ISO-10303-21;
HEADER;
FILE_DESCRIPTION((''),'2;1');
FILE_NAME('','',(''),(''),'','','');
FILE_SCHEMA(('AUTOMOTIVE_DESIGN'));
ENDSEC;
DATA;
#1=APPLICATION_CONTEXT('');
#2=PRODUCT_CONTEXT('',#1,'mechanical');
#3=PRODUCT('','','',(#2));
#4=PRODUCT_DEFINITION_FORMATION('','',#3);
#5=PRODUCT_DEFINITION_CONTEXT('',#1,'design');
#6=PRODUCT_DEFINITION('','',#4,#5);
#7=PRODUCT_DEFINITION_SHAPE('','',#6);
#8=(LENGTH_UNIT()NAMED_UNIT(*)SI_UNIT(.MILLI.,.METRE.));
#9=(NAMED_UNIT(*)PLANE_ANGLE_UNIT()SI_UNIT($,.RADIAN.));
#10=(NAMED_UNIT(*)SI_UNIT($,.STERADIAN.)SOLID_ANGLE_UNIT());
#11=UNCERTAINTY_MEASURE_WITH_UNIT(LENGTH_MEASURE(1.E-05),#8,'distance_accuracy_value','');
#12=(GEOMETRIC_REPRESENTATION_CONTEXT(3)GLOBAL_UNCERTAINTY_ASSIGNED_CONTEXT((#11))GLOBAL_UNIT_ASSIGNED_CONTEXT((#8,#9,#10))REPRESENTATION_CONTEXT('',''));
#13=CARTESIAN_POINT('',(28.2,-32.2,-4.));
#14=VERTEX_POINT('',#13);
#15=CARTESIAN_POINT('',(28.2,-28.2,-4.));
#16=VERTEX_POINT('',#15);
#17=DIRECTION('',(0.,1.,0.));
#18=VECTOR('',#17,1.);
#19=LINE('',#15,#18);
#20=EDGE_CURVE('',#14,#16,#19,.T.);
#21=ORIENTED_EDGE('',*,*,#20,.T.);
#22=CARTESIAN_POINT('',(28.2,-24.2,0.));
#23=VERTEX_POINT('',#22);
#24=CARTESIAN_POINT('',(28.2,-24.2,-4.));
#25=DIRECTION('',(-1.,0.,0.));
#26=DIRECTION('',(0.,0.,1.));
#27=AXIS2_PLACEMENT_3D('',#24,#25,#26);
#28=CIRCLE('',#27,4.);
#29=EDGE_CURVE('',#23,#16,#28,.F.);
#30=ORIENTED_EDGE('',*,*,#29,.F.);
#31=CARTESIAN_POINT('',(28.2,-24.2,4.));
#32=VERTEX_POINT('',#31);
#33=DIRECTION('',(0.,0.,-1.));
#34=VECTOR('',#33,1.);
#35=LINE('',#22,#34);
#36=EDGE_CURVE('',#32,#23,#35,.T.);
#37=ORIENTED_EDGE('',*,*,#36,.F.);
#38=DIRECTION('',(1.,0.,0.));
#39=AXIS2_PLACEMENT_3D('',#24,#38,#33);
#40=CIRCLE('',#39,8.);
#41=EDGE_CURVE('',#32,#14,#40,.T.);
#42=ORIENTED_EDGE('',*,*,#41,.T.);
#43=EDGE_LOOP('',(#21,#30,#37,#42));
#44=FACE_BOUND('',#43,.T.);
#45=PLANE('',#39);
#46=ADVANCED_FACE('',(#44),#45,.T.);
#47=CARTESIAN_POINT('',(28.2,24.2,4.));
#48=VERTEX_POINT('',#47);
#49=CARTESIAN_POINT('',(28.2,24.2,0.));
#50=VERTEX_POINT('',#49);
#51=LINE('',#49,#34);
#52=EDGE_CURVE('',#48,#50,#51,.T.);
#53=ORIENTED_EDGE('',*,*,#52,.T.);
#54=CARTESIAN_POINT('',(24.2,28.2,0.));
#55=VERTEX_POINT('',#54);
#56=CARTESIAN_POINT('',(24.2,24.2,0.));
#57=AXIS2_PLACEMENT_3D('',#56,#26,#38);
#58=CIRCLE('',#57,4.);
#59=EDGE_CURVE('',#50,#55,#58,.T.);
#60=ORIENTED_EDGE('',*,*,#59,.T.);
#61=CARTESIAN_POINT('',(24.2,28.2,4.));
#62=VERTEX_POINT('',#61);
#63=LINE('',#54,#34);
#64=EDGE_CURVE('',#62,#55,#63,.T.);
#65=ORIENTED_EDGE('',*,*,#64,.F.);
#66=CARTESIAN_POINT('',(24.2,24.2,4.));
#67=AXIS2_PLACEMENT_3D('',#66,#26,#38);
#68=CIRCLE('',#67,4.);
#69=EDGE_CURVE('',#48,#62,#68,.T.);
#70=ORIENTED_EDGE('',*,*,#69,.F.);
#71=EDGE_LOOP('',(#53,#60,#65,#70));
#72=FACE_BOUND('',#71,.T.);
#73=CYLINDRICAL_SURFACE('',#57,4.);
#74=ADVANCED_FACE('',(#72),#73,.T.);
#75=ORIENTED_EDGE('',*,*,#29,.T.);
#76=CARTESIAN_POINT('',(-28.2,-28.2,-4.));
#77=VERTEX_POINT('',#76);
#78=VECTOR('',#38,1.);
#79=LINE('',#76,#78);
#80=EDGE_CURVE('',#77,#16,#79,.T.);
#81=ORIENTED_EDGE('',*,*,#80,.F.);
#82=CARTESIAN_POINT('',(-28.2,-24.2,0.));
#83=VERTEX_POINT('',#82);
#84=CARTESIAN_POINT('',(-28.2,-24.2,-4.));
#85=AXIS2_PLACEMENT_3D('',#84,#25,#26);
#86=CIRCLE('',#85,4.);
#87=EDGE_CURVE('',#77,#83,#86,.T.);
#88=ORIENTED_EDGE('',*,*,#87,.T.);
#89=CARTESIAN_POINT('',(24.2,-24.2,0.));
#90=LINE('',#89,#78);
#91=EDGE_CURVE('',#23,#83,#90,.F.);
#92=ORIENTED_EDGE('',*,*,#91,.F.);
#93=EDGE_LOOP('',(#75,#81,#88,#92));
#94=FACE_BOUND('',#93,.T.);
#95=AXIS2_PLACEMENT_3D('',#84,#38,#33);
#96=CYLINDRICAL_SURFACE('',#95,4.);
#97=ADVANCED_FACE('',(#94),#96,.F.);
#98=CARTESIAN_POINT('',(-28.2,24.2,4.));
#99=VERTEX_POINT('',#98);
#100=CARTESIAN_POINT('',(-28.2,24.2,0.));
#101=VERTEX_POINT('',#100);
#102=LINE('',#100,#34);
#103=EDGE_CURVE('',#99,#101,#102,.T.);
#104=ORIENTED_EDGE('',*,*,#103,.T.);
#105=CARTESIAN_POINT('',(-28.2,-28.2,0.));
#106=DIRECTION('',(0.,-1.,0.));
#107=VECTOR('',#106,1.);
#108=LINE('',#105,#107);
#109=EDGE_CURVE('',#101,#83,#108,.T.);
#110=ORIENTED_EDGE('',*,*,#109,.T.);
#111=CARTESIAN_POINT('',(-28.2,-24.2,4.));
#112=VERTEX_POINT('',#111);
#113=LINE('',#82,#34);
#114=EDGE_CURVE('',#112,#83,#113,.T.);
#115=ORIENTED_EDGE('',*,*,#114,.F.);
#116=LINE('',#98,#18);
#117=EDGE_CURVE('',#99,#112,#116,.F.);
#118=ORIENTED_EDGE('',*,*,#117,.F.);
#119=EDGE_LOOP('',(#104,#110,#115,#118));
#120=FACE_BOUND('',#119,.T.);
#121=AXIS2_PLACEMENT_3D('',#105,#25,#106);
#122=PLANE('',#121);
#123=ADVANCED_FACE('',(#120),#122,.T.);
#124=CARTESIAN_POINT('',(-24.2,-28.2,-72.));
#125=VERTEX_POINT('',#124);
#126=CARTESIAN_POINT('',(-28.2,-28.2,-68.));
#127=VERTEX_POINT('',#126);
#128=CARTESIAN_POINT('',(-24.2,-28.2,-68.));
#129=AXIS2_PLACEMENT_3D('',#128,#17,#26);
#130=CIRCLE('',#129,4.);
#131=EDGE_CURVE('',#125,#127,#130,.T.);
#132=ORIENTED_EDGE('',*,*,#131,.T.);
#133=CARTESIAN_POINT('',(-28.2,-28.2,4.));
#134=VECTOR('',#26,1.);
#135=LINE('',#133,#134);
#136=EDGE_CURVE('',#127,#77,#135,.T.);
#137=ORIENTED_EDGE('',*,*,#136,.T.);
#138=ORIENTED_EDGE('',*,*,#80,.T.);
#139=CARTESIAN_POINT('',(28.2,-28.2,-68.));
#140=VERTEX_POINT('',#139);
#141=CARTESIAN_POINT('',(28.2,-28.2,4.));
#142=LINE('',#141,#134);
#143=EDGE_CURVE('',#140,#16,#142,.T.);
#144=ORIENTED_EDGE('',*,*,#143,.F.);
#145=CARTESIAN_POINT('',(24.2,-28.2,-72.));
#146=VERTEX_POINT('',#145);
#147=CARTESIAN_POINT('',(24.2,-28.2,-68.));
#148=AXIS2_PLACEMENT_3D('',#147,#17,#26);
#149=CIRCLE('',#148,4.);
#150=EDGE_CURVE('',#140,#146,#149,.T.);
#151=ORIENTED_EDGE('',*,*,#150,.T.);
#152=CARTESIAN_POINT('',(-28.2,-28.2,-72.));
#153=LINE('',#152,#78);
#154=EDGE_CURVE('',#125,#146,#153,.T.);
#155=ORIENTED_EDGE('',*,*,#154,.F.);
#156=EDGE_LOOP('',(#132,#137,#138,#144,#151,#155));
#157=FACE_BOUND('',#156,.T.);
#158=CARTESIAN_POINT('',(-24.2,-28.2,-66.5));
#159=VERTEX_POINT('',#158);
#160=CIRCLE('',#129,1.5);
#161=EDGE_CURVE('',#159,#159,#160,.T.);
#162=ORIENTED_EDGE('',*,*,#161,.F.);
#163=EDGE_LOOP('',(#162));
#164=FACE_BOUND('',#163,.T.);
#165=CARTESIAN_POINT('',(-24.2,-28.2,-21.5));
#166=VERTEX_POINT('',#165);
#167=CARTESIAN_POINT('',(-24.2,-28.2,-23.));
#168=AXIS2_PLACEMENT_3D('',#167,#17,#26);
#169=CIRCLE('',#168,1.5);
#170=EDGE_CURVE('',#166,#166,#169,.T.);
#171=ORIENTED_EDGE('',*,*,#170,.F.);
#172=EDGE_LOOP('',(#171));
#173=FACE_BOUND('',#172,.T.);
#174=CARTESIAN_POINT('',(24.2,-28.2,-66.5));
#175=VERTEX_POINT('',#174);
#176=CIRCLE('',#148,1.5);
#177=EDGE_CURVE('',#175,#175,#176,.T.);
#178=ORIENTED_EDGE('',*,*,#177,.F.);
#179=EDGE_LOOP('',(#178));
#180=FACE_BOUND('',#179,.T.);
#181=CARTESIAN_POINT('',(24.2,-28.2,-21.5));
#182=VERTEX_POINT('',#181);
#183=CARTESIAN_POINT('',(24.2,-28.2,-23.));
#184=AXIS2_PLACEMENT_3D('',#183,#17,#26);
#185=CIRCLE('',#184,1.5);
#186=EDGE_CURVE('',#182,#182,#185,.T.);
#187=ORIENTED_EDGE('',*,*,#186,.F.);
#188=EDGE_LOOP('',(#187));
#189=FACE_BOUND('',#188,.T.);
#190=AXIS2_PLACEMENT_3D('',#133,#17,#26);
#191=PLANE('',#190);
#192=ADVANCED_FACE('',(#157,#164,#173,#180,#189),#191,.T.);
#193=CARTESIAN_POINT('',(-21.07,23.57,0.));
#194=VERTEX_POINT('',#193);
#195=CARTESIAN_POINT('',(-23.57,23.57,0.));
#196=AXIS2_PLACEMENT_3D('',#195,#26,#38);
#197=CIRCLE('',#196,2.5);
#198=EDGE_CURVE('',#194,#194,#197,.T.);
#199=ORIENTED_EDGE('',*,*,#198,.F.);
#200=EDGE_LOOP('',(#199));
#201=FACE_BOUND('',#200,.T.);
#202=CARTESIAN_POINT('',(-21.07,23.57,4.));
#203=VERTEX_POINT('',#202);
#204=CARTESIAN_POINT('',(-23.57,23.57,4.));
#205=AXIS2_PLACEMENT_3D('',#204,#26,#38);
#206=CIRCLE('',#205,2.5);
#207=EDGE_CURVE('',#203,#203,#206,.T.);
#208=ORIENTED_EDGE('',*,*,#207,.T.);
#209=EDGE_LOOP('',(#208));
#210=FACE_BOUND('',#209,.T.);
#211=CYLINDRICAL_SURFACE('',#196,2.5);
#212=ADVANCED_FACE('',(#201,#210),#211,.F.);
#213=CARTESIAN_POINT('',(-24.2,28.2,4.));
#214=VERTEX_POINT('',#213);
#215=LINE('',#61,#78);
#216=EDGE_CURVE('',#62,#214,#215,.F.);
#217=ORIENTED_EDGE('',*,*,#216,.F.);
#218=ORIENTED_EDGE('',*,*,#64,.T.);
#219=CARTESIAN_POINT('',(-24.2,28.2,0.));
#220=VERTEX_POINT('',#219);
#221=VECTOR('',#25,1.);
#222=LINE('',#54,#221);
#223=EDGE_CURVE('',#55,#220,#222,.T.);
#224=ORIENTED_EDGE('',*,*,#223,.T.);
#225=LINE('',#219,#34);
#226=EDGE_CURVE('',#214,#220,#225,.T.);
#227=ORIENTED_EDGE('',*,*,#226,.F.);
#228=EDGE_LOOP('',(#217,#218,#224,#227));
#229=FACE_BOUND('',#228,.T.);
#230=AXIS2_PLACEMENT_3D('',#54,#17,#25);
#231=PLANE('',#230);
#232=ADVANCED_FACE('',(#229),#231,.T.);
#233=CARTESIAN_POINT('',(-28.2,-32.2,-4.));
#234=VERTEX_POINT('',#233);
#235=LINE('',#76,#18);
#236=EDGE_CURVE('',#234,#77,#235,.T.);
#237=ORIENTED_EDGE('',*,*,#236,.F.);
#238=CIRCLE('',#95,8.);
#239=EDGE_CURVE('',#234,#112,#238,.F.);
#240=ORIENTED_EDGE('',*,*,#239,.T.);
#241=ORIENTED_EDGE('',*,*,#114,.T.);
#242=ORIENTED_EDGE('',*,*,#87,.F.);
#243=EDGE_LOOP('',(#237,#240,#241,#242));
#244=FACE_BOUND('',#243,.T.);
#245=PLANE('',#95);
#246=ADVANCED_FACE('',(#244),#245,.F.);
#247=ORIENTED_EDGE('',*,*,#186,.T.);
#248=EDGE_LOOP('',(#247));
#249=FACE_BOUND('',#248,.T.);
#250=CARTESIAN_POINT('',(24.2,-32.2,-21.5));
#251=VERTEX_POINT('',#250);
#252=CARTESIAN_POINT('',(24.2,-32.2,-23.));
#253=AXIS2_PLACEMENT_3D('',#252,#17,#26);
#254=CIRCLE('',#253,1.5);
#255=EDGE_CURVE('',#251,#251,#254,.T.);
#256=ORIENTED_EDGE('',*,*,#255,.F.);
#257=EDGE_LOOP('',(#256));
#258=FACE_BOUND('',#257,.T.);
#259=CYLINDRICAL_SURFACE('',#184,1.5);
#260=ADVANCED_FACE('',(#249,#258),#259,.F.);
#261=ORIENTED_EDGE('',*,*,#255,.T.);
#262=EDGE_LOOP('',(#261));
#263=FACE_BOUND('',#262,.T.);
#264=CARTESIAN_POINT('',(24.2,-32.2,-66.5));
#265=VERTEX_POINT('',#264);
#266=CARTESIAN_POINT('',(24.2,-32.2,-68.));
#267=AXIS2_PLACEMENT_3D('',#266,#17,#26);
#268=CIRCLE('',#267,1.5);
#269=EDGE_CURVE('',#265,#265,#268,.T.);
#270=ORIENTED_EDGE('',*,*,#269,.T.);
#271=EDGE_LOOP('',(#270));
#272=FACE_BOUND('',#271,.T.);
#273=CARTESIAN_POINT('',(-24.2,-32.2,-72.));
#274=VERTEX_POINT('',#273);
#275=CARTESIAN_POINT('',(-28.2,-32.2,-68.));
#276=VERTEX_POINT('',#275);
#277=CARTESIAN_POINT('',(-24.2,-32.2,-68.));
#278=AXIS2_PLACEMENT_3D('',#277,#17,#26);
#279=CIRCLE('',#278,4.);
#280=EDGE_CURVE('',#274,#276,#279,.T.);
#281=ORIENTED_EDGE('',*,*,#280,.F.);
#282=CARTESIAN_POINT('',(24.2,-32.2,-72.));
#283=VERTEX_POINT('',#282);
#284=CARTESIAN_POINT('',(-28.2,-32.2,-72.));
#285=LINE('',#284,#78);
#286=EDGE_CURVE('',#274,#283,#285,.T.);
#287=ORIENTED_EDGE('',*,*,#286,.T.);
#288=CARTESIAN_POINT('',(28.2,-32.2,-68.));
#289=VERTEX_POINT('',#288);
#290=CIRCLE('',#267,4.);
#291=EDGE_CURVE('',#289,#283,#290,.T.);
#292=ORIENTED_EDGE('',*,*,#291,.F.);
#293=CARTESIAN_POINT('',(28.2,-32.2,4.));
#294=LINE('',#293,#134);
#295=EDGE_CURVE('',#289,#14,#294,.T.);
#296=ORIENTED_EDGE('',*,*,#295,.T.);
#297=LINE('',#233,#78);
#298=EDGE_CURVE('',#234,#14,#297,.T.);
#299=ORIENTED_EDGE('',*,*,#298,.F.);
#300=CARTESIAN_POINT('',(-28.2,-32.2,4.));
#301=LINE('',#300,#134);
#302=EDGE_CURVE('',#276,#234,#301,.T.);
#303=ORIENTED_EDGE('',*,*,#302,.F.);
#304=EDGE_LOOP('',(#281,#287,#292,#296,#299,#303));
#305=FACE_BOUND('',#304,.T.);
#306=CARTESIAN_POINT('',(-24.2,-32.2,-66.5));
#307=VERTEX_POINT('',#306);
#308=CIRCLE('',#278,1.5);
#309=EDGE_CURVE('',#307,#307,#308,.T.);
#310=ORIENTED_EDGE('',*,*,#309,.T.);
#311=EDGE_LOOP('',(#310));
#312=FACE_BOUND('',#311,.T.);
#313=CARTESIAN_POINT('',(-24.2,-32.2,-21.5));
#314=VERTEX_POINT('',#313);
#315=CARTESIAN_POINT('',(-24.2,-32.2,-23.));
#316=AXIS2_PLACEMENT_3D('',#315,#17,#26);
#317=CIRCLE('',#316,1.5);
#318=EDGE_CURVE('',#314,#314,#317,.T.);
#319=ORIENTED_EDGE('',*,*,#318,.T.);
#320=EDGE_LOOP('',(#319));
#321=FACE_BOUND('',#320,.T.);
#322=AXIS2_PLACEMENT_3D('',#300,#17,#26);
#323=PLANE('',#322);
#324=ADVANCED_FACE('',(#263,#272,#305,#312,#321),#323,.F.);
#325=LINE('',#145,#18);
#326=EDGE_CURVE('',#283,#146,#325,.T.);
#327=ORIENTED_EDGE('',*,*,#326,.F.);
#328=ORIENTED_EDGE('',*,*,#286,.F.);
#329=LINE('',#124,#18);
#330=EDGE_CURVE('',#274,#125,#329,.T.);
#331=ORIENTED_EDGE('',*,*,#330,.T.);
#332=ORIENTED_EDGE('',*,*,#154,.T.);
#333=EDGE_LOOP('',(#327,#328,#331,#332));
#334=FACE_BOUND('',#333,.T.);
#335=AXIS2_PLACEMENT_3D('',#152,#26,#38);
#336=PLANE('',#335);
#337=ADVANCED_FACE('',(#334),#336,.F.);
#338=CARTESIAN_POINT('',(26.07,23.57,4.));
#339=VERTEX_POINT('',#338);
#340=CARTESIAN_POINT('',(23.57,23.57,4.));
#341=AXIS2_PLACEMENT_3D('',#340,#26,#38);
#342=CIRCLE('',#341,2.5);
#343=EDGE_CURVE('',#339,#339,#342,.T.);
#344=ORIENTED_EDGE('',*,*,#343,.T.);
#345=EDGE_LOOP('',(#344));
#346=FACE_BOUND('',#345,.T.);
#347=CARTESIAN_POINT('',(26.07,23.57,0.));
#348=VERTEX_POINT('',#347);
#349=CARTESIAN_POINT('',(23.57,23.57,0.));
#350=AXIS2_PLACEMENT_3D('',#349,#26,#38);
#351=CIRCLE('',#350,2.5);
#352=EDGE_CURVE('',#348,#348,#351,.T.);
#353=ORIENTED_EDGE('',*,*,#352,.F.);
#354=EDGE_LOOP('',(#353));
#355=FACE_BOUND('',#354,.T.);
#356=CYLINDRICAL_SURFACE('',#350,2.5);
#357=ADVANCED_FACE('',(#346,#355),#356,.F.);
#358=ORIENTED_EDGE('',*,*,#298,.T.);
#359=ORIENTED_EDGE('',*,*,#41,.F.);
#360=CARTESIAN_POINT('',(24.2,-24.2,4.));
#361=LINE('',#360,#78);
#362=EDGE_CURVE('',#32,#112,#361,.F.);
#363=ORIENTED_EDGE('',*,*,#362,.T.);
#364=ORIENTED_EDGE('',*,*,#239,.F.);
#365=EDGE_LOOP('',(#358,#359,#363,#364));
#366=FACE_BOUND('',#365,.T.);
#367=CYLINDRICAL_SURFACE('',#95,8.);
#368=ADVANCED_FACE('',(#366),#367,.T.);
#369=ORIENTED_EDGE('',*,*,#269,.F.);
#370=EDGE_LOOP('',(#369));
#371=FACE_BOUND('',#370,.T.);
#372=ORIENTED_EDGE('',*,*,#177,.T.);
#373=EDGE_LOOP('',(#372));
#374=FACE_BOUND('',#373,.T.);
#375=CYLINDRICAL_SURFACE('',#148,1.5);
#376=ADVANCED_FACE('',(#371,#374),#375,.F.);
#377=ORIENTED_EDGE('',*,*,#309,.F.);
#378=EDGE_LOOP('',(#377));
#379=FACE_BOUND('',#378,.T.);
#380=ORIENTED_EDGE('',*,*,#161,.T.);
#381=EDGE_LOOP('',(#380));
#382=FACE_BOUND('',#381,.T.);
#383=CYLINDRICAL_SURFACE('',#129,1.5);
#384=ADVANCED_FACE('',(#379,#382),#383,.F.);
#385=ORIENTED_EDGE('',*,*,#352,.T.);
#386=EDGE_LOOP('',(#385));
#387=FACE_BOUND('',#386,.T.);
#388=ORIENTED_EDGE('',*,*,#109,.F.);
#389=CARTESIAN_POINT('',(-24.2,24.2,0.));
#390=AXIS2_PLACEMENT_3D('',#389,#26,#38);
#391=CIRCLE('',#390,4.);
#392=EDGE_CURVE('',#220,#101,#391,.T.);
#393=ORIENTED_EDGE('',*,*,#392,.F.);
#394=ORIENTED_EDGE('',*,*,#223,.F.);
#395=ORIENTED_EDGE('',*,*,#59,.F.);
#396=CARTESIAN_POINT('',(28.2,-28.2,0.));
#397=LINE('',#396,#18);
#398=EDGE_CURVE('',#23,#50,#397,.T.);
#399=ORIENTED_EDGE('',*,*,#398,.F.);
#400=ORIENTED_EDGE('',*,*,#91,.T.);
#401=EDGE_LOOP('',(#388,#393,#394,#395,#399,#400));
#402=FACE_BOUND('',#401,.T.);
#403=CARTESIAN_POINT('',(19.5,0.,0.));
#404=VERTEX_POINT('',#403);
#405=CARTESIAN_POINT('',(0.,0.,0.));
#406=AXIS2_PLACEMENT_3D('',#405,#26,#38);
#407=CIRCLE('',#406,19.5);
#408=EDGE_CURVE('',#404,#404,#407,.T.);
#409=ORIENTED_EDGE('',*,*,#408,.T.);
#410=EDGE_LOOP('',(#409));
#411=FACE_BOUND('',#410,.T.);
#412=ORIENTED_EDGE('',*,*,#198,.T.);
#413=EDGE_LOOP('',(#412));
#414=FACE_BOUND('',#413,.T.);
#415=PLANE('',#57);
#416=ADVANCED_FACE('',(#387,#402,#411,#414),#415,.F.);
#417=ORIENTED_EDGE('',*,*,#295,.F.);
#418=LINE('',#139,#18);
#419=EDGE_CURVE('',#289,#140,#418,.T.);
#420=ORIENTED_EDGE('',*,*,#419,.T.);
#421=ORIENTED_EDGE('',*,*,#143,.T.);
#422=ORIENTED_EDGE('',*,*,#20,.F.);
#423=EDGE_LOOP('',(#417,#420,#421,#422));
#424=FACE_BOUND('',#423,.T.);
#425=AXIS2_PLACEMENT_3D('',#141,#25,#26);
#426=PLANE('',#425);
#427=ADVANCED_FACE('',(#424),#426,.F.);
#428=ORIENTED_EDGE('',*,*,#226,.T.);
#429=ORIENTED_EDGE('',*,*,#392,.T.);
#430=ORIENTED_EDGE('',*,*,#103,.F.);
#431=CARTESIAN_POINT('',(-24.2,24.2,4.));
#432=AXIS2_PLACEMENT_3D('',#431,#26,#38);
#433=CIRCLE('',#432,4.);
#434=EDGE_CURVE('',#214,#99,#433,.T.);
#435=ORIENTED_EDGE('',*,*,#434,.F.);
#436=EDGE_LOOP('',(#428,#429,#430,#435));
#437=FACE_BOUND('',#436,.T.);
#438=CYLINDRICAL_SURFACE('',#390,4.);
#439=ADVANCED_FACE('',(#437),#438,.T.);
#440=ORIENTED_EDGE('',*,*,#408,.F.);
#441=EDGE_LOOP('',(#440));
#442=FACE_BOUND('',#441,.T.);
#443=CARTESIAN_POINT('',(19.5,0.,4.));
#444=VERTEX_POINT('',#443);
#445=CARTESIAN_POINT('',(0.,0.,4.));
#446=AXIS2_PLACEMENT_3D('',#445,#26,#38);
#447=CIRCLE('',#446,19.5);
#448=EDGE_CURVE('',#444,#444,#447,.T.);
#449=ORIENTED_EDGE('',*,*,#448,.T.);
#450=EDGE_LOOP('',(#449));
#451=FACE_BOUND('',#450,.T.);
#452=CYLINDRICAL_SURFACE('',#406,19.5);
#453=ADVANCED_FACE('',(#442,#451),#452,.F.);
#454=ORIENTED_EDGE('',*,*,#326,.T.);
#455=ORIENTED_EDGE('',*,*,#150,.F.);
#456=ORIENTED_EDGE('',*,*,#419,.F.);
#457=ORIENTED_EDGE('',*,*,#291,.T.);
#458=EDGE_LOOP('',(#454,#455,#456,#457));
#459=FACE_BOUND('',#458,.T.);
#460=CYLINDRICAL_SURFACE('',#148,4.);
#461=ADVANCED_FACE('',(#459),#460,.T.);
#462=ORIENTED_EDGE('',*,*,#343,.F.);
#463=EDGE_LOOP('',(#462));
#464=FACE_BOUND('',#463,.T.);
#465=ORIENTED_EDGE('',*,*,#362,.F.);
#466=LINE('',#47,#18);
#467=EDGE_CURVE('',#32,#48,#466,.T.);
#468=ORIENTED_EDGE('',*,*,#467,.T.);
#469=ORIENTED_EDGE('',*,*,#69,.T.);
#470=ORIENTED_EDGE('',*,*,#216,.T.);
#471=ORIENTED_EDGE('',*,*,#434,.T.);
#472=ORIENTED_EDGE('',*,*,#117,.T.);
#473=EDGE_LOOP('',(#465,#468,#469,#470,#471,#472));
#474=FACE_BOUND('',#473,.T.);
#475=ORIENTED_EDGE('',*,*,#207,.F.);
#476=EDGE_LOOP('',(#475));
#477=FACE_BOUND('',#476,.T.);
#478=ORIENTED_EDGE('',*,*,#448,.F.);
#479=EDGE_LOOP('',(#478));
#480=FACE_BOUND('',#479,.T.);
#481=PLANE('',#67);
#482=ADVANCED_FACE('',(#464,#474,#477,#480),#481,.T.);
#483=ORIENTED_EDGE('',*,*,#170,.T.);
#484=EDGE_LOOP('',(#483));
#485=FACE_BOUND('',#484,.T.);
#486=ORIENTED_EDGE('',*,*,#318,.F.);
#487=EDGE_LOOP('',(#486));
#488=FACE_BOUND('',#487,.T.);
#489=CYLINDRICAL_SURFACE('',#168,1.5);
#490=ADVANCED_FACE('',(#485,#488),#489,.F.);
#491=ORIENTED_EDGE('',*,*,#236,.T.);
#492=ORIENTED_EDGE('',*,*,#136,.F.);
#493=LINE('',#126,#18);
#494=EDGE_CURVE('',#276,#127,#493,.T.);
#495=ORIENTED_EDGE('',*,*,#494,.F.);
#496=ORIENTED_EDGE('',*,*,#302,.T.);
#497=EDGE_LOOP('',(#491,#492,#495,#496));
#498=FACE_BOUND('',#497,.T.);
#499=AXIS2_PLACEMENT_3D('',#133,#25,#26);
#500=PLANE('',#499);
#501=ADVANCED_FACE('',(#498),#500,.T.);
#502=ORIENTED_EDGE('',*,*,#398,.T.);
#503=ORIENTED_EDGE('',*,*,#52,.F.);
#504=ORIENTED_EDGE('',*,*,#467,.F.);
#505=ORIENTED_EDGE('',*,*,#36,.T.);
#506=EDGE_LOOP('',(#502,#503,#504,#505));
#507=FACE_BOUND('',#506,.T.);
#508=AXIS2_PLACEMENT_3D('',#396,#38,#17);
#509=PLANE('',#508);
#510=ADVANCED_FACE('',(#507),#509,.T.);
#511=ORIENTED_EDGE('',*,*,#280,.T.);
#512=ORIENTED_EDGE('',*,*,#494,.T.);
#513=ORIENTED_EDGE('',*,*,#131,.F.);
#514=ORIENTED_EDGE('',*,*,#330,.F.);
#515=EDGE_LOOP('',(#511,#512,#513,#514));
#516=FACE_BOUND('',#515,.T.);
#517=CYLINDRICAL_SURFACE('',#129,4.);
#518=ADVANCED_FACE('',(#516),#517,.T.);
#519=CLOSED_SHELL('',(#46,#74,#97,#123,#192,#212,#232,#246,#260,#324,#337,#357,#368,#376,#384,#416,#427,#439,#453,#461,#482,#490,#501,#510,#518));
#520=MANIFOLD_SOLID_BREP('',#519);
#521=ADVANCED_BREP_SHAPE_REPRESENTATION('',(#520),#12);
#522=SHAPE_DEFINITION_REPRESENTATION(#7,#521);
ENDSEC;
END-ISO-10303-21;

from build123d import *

# Parameters (mm, degrees)
BOSS_EXTRUDE1_DEPTH    = 4
SKETCH3_W              = 76
SKETCH3_H              = 4
BOSS_EXTRUDE2_DEPTH    = 56.4
SKETCH15_R             = 2.5
SKETCH15_R_2           = 19.5
CUT_EXTRUDE3_DEPTH     = 88.224308538
FILLET4_R              = 4
SKETCH18_R             = 1.5
CUT_EXTRUDE4_DEPTH     = 96.708933752
CONVERT_SOLID2_START   = -28.2
CONVERT_SOLID2_DEPTH   = 56.4
CONVERT_SOLID2_2_DEPTH = 56.4


# Read off the part's stored shape, not the designer's step: Convert-Solid2
with BuildPart() as part:
    # Sketch1 → Boss-Extrude1 (new body)
    with BuildSketch(Plane.XY):
        with BuildLine():
            Line((28.2, -28.2), (-28.2, -28.2))
            Line((-28.2, -28.2), (-28.2, 24.2))
            ThreePointArc((-28.2, 24.2), (-27.028427125, 27.028427125), (-24.2, 28.2))
            Line((-24.2, 28.2), (24.2, 28.2))
            ThreePointArc((24.2, 28.2), (27.028427125, 27.028427125), (28.2, 24.2))
            Line((28.2, 24.2), (28.2, -28.2))
        make_face()
    extrude(amount=BOSS_EXTRUDE1_DEPTH)

    # Sketch3 → Boss-Extrude2 (add)
    with BuildSketch(Plane(origin=(28.2, 0, 0), x_dir=(0, 0, -1), z_dir=(1, 0, 0))):
        with Locations((34, -30.2)):
            Rectangle(SKETCH3_W, SKETCH3_H)
    extrude(amount=-BOSS_EXTRUDE2_DEPTH)

    # Sketch15 → Cut-Extrude3 (cut, through all)
    with BuildSketch(Plane.XY.offset(4)):
        with Locations((-23.57, 23.57)):
            Circle(SKETCH15_R)
        with Locations((23.57, 23.57)):
            Circle(SKETCH15_R)
        Circle(SKETCH15_R_2)
    extrude(amount=-CUT_EXTRUDE3_DEPTH, mode=Mode.SUBTRACT)

    # Fillet4
    fillet4_edges = [part.edges().sort_by_distance(p)[0] for p in [
        (-28.2, -30.2, -72),
        (28.2, -30.2, -72),
    ]]
    fillet(fillet4_edges, radius=FILLET4_R)

    # Sketch18 → Cut-Extrude4 (cut, through all)
    with BuildSketch(Plane(origin=(0, -28.2, 0), x_dir=(1, 0, 0), z_dir=(0, 1, 0))):
        with Locations(Location((-24.2, 68, 0), (0, 0, 270))):
            Circle(SKETCH18_R)
        with Locations(Location((24.2, 68, 0), (0, 0, 270))):
            Circle(SKETCH18_R)
        with Locations(Location((-24.2, 23, 0), (0, 0, 270))):
            Circle(SKETCH18_R)
        with Locations(Location((24.2, 23, 0), (0, 0, 270))):
            Circle(SKETCH18_R)
    extrude(amount=-CUT_EXTRUDE4_DEPTH, mode=Mode.SUBTRACT)

    # Convert-Solid2 outline → Convert-Solid2 (cut)
    with BuildSketch(Plane.YZ.offset(CONVERT_SOLID2_START)):
        with BuildLine():
            ThreePointArc((-32.2, -4), (-29.856854249, 1.656854249), (-24.2, 4))
            Line((-24.2, 4), (-32.2, 4))
            Line((-32.2, 4), (-32.2, -4))
        make_face()
    extrude(amount=CONVERT_SOLID2_DEPTH, mode=Mode.SUBTRACT)

    # Convert-Solid2 2 outline → Convert-Solid2 2 (add)
    with BuildSketch(Plane.YZ.offset(CONVERT_SOLID2_START)):
        with BuildLine():
            ThreePointArc((-28.2, -4), (-27.028427125, -1.171572875), (-24.2, 0))
            Line((-24.2, 0), (-28.2, 0))
            Line((-28.2, 0), (-28.2, -4))
        make_face()
    extrude(amount=CONVERT_SOLID2_2_DEPTH)


solid = part.part
